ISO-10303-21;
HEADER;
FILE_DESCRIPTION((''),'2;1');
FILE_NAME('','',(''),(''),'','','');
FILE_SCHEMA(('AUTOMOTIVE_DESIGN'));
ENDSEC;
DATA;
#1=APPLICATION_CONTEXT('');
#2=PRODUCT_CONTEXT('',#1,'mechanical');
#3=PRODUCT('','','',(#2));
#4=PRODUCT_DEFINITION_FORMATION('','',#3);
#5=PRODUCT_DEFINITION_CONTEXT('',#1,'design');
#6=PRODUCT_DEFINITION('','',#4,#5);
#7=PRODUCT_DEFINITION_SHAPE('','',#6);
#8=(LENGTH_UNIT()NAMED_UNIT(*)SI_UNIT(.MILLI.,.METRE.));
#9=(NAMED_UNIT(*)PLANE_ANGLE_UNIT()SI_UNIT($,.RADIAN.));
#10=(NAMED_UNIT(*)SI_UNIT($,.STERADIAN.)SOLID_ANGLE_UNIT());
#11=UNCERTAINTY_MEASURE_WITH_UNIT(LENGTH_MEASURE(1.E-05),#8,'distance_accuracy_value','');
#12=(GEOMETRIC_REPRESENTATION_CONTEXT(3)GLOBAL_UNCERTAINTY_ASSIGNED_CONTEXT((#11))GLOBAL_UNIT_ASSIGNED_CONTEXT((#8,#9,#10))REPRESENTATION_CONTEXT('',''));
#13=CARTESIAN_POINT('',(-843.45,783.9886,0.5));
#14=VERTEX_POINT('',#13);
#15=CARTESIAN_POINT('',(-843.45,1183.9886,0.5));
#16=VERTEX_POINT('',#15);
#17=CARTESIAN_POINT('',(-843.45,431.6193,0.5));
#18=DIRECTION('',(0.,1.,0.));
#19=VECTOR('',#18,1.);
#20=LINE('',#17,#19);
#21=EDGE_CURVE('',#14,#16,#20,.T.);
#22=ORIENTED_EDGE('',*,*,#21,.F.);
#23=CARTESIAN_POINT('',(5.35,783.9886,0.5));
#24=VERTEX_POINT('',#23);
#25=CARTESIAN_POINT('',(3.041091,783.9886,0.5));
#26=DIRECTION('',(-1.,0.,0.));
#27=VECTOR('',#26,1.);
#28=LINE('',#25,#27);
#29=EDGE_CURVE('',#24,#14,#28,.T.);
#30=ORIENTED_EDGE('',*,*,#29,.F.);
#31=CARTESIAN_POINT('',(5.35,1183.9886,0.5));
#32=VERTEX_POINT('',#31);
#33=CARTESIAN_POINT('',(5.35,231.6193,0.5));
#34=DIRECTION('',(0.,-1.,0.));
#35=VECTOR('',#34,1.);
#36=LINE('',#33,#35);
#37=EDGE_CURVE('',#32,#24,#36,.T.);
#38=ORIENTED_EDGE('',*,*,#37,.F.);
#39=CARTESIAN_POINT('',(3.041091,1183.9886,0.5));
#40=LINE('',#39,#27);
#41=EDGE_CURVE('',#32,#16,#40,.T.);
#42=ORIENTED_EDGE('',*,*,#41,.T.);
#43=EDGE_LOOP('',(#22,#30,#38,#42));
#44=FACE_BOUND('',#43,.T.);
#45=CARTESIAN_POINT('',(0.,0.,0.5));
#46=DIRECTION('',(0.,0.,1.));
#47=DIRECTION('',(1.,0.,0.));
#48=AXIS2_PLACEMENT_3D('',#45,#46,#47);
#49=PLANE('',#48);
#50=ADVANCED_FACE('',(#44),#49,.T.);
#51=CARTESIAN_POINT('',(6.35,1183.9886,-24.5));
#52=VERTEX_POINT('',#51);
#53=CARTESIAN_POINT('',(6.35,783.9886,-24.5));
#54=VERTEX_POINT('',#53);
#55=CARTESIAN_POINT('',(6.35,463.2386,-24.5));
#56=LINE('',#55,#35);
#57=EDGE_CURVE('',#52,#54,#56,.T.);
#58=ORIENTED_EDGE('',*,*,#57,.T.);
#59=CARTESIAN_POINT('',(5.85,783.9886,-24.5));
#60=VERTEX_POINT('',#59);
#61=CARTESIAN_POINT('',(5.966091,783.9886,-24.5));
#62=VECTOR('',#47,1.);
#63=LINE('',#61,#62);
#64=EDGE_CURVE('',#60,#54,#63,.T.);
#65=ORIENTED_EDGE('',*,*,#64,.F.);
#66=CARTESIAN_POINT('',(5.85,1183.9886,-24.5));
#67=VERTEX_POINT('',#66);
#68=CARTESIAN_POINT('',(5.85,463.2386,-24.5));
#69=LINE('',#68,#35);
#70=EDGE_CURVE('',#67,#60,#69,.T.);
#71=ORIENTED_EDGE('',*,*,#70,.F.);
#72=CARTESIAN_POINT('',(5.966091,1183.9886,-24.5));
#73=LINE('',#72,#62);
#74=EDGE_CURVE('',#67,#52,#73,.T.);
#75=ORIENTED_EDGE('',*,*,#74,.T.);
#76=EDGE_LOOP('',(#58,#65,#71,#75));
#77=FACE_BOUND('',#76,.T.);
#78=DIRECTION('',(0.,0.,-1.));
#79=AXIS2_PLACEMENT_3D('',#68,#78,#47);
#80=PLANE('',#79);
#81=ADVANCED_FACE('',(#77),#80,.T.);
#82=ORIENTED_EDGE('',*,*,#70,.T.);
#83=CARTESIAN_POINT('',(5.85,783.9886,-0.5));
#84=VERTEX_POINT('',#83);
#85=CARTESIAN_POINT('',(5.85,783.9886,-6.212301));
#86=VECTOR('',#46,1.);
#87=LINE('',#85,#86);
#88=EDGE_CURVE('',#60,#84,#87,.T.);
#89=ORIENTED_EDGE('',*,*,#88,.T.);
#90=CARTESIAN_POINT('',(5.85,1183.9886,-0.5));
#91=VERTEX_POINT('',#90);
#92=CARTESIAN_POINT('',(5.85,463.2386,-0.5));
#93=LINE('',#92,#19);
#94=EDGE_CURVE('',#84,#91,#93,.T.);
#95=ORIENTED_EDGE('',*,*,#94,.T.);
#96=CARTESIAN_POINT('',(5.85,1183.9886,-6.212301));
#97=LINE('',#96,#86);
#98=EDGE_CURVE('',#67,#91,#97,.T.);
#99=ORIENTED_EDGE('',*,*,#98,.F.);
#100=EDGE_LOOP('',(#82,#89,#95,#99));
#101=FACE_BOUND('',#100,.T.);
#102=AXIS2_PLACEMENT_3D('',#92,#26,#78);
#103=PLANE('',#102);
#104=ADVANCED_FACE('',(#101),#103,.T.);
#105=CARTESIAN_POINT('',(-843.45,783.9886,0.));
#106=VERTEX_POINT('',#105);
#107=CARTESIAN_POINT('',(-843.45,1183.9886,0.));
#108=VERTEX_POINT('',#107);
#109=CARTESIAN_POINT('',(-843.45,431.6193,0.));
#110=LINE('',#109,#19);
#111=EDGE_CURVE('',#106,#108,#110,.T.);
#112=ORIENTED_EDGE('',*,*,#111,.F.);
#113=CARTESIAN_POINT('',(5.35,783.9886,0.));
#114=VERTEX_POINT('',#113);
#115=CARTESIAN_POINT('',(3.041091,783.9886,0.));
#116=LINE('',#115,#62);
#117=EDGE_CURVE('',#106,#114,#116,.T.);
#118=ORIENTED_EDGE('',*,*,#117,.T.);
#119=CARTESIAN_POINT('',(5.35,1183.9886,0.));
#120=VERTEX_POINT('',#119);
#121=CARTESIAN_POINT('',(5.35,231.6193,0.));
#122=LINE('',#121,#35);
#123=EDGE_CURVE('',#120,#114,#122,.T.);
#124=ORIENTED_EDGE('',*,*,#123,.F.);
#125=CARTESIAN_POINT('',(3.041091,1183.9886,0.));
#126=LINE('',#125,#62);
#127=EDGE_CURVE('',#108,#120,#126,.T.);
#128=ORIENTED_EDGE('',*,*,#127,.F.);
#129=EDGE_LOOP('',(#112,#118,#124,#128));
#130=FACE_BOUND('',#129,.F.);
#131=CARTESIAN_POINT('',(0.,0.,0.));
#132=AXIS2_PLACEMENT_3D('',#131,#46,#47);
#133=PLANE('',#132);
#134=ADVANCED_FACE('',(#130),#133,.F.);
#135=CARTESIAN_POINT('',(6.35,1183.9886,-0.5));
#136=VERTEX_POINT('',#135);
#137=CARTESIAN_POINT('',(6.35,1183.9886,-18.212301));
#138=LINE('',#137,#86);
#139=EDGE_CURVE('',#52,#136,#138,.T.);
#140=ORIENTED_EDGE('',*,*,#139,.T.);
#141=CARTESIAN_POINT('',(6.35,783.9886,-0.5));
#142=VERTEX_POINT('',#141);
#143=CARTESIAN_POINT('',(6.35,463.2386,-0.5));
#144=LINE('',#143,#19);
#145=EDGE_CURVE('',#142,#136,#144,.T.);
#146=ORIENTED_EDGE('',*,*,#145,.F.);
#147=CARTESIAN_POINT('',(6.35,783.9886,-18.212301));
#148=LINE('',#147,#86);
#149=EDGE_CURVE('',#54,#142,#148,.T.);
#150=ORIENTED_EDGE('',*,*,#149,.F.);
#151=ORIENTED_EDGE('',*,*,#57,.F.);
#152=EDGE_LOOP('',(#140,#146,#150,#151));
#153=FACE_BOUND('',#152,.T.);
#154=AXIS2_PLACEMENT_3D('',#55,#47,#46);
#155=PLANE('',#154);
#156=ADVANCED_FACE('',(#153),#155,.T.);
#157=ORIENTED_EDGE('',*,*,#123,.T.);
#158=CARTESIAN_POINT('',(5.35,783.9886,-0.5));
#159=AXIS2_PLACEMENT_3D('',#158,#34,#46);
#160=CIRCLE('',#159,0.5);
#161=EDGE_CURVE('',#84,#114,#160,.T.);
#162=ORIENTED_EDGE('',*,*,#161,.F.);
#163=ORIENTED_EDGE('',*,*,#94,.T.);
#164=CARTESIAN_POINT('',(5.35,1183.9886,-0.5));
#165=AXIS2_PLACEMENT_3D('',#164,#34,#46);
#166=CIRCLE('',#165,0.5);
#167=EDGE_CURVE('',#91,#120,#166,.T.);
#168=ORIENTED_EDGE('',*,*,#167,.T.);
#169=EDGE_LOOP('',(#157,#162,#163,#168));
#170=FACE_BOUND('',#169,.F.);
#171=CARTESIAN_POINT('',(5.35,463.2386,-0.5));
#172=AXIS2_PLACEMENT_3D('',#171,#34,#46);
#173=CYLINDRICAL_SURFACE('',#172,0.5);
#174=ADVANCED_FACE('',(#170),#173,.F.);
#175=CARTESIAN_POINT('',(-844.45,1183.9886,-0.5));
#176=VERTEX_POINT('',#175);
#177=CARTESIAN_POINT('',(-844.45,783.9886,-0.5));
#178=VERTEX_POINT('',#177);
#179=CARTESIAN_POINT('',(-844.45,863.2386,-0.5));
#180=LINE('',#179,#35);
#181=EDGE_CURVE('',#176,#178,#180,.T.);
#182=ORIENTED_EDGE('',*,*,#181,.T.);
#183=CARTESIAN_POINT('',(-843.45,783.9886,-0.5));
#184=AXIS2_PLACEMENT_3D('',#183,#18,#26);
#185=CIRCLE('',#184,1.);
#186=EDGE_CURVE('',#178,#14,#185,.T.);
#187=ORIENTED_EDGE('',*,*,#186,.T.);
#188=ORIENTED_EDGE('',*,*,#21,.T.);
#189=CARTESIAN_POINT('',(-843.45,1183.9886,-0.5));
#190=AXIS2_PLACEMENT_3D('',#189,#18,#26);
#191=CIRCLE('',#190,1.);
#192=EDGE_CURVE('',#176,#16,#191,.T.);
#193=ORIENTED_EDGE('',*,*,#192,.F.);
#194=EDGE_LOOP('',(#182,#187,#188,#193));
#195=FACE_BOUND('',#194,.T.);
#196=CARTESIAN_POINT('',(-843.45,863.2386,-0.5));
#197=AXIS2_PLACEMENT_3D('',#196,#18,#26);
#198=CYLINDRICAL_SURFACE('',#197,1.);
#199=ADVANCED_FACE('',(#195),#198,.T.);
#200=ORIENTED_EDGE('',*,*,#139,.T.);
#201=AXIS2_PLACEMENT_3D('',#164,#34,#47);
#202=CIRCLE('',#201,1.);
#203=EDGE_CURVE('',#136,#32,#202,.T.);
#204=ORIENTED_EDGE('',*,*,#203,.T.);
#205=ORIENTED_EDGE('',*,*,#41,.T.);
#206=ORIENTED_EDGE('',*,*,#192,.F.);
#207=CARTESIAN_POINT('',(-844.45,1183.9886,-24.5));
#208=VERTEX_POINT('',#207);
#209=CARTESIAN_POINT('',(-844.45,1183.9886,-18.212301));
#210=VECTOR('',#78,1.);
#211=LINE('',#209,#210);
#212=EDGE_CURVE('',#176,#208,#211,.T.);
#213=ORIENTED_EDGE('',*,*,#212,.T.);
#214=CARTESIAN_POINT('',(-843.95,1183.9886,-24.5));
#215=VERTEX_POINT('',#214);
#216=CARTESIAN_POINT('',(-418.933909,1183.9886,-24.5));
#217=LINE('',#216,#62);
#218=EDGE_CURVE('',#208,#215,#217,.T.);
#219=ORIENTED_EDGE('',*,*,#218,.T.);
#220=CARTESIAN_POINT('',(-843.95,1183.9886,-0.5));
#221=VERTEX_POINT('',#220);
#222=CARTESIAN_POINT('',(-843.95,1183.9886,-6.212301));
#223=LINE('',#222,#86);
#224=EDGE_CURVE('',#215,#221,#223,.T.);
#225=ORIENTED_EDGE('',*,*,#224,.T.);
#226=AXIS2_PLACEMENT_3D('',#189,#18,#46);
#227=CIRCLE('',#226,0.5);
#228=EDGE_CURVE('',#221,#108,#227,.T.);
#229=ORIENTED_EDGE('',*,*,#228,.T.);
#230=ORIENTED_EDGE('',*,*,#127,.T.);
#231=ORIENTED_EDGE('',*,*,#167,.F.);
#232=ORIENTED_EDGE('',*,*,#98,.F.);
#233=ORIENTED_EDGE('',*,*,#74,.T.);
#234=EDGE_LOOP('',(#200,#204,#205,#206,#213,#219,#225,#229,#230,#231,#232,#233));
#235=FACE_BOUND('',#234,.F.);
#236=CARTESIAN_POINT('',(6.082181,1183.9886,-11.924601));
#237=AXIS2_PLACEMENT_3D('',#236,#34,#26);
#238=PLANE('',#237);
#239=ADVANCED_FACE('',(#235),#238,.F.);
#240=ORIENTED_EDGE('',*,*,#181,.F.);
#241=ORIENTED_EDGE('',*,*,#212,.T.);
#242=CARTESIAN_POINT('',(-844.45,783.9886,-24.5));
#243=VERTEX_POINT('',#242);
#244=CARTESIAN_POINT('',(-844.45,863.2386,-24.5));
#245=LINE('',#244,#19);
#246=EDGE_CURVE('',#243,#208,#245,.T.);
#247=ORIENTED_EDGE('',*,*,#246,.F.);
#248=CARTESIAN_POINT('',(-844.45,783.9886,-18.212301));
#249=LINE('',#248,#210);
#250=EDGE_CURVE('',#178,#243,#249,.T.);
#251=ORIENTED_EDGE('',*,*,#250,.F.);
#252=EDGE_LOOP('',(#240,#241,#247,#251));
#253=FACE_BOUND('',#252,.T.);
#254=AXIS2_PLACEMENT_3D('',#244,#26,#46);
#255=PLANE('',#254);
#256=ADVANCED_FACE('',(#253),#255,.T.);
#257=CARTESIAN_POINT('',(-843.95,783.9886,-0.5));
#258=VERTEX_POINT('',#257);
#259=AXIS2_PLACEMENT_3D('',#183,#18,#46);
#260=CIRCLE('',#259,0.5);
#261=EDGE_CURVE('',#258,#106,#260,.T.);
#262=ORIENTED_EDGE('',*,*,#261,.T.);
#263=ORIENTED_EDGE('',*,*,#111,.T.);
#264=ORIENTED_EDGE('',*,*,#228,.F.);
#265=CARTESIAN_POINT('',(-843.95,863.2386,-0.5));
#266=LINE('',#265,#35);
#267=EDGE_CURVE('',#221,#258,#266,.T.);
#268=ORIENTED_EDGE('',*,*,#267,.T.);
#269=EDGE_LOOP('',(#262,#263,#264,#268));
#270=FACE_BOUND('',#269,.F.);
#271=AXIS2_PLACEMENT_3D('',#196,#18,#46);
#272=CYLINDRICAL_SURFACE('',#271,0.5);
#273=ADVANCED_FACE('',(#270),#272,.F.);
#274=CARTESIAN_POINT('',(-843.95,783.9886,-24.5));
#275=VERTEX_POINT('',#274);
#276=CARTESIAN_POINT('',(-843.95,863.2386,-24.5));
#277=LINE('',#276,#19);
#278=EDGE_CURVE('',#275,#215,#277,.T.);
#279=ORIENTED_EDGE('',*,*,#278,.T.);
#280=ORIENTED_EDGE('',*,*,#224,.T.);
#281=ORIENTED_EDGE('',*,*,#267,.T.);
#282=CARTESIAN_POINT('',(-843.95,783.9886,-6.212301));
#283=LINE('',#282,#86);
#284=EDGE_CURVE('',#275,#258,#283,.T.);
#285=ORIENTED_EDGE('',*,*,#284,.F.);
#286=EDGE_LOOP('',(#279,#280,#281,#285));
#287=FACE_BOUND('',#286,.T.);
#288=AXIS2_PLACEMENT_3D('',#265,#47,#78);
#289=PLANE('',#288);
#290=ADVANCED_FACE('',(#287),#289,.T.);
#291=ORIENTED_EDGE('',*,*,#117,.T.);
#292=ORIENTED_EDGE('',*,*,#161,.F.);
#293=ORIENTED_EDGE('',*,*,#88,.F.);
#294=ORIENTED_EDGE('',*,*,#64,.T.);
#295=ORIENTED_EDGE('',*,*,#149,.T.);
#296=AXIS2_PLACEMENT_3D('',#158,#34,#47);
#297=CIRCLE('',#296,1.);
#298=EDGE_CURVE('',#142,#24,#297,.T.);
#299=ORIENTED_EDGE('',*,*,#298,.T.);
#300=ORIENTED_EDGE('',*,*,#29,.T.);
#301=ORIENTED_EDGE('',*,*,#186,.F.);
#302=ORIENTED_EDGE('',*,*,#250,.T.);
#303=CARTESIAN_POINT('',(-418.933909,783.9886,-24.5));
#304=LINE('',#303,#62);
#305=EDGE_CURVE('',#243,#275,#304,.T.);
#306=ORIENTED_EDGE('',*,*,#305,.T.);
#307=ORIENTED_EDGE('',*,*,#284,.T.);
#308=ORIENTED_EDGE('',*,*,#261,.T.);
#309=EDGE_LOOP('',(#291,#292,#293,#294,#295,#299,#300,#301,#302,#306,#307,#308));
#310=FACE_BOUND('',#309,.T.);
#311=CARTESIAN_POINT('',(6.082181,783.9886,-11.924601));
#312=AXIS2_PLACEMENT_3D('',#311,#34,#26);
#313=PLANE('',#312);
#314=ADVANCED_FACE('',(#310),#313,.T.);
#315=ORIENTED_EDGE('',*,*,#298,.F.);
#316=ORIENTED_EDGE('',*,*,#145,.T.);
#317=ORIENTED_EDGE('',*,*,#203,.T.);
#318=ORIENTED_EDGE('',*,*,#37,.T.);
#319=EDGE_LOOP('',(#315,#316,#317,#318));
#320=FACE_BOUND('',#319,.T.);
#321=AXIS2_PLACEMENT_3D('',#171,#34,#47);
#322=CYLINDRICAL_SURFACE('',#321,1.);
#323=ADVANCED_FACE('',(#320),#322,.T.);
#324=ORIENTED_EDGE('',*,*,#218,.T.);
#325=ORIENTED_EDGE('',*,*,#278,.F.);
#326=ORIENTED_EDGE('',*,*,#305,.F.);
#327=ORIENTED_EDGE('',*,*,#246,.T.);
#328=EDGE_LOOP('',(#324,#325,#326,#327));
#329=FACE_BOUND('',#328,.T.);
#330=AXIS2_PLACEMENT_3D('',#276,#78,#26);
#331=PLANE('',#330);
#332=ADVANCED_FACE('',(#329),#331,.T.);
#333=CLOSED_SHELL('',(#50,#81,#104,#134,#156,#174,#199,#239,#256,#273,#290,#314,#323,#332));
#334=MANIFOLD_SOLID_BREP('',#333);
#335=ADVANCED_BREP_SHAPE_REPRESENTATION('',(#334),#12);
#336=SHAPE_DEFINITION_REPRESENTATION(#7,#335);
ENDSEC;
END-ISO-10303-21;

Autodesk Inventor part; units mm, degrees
ref_plane "YZ Plane" through (0, 0, 0) normal (1, 0, 0) x (0, 1, 0)
ref_plane "XZ Plane" through (0, 0, 0) normal (0, 1, 0) x (-1, 0, 0)
ref_plane "XY Plane" through (0, 0, 0) normal (0, 0, 1) x (1, 0, 0)
ref_plane "Work Plane1" through (0, 0, 0) normal (0, 0, 1) x (1, 0, 0)
sketch "Sketch1" plane through (0, 0, 0) normal (0, 0, 1) x (1, 0, 0)
  line L0 (-849.45, 463.2386) -> (11.35, 463.2386)
  line L1 (11.35, 463.2386) -> (11.35, 863.2386)
  line L2 (11.35, 863.2386) -> (-849.45, 863.2386)
  line L3 (-849.45, 863.2386) -> (-849.45, 463.2386)
  line L4 (-844.45, 1225.4) -> (-844.45, -25.4)
  line L5 (6.35, -25.4) -> (6.35, 1225.4)
  point P0 (0, 0)
  point P1 (6.35, 463.2386)
  point P2 (6.35, 863.2386)
  point P3 (-844.45, 863.2386)
  point P4 (-844.45, 463.2386)
  dimension "d1" = 400
  dimension "d2" = 5
  dimension "d3" = 5
extrude "Plate1" add sketch "Sketch1" along normal blind 0.5 contours L4 L2 L5 L0
sketch "Sketch2" plane through (5.85, 863.2386, 0.5) normal (1, 0, 0) x (0, 1, 0)
  line L0 (-400, 0) -> (0, 0)
  line L1 (0, 0) -> (0, 25)
  line L2 (0, 25) -> (-400, 25)
  line L3 (-400, 25) -> (-400, 0)
edge flange "Flange1" height 25 angle 90 thickness 0.5 bend radius 0.5 thickness toward (1, 0, 0) relief tear relief width 0.5 relief depth 0.25 corner gap 0.5 corner form 0 edges at (6.35, 663.2386, 0.5) (-844.45, 663.2386, 0.5) wall of the first edge with corners at (5.85, 463.2386, 0.5) (5.85, 863.2386, 0.5) (5.85, 863.2386, -24.5) (5.85, 463.2386, -24.5)
bend "Bend1"
corner "Corner1"
move faces "Move1" translate (0, 320.75, 0) faces at (-560.5167, 463.2386, 0.3333) (-277.5833, 863.2386, 0.3333)
equation "\"d4\" = Thickness"
equation "\"d5\" = BendReliefWidth"
equation "\"d6\" = BendReliefDepth"
equation "\"d7\" = MinimumRemnant"
equation "\"d8\" = TransitionRadius"
equation "\"d11\" = BendRadius"
equation "\"d12\" = CornerReliefSize"
equation "\"d13\" = GapSize"
equation "\"d14\" = JacobiRadiusSize"
equation "\"BendRadius\" = Thickness"
equation "\"BendReliefWidth\" = Thickness"
equation "\"BendReliefDepth\" = 0.5 * Thickness"
equation "\"CornerReliefSize\" = 4 * Thickness"
equation "\"MinimumRemnant\" = 2 * Thickness"
equation "\"TransitionRadius\" = BendRadius"
equation "\"JacobiRadiusSize\" = BendRadius"
equation "\"GapSize\" = Thickness"
equation "\"Thickness\" = 0.5"
properties part number "ENGINE_BASE" material "Stainless Steel, Austenitic"
